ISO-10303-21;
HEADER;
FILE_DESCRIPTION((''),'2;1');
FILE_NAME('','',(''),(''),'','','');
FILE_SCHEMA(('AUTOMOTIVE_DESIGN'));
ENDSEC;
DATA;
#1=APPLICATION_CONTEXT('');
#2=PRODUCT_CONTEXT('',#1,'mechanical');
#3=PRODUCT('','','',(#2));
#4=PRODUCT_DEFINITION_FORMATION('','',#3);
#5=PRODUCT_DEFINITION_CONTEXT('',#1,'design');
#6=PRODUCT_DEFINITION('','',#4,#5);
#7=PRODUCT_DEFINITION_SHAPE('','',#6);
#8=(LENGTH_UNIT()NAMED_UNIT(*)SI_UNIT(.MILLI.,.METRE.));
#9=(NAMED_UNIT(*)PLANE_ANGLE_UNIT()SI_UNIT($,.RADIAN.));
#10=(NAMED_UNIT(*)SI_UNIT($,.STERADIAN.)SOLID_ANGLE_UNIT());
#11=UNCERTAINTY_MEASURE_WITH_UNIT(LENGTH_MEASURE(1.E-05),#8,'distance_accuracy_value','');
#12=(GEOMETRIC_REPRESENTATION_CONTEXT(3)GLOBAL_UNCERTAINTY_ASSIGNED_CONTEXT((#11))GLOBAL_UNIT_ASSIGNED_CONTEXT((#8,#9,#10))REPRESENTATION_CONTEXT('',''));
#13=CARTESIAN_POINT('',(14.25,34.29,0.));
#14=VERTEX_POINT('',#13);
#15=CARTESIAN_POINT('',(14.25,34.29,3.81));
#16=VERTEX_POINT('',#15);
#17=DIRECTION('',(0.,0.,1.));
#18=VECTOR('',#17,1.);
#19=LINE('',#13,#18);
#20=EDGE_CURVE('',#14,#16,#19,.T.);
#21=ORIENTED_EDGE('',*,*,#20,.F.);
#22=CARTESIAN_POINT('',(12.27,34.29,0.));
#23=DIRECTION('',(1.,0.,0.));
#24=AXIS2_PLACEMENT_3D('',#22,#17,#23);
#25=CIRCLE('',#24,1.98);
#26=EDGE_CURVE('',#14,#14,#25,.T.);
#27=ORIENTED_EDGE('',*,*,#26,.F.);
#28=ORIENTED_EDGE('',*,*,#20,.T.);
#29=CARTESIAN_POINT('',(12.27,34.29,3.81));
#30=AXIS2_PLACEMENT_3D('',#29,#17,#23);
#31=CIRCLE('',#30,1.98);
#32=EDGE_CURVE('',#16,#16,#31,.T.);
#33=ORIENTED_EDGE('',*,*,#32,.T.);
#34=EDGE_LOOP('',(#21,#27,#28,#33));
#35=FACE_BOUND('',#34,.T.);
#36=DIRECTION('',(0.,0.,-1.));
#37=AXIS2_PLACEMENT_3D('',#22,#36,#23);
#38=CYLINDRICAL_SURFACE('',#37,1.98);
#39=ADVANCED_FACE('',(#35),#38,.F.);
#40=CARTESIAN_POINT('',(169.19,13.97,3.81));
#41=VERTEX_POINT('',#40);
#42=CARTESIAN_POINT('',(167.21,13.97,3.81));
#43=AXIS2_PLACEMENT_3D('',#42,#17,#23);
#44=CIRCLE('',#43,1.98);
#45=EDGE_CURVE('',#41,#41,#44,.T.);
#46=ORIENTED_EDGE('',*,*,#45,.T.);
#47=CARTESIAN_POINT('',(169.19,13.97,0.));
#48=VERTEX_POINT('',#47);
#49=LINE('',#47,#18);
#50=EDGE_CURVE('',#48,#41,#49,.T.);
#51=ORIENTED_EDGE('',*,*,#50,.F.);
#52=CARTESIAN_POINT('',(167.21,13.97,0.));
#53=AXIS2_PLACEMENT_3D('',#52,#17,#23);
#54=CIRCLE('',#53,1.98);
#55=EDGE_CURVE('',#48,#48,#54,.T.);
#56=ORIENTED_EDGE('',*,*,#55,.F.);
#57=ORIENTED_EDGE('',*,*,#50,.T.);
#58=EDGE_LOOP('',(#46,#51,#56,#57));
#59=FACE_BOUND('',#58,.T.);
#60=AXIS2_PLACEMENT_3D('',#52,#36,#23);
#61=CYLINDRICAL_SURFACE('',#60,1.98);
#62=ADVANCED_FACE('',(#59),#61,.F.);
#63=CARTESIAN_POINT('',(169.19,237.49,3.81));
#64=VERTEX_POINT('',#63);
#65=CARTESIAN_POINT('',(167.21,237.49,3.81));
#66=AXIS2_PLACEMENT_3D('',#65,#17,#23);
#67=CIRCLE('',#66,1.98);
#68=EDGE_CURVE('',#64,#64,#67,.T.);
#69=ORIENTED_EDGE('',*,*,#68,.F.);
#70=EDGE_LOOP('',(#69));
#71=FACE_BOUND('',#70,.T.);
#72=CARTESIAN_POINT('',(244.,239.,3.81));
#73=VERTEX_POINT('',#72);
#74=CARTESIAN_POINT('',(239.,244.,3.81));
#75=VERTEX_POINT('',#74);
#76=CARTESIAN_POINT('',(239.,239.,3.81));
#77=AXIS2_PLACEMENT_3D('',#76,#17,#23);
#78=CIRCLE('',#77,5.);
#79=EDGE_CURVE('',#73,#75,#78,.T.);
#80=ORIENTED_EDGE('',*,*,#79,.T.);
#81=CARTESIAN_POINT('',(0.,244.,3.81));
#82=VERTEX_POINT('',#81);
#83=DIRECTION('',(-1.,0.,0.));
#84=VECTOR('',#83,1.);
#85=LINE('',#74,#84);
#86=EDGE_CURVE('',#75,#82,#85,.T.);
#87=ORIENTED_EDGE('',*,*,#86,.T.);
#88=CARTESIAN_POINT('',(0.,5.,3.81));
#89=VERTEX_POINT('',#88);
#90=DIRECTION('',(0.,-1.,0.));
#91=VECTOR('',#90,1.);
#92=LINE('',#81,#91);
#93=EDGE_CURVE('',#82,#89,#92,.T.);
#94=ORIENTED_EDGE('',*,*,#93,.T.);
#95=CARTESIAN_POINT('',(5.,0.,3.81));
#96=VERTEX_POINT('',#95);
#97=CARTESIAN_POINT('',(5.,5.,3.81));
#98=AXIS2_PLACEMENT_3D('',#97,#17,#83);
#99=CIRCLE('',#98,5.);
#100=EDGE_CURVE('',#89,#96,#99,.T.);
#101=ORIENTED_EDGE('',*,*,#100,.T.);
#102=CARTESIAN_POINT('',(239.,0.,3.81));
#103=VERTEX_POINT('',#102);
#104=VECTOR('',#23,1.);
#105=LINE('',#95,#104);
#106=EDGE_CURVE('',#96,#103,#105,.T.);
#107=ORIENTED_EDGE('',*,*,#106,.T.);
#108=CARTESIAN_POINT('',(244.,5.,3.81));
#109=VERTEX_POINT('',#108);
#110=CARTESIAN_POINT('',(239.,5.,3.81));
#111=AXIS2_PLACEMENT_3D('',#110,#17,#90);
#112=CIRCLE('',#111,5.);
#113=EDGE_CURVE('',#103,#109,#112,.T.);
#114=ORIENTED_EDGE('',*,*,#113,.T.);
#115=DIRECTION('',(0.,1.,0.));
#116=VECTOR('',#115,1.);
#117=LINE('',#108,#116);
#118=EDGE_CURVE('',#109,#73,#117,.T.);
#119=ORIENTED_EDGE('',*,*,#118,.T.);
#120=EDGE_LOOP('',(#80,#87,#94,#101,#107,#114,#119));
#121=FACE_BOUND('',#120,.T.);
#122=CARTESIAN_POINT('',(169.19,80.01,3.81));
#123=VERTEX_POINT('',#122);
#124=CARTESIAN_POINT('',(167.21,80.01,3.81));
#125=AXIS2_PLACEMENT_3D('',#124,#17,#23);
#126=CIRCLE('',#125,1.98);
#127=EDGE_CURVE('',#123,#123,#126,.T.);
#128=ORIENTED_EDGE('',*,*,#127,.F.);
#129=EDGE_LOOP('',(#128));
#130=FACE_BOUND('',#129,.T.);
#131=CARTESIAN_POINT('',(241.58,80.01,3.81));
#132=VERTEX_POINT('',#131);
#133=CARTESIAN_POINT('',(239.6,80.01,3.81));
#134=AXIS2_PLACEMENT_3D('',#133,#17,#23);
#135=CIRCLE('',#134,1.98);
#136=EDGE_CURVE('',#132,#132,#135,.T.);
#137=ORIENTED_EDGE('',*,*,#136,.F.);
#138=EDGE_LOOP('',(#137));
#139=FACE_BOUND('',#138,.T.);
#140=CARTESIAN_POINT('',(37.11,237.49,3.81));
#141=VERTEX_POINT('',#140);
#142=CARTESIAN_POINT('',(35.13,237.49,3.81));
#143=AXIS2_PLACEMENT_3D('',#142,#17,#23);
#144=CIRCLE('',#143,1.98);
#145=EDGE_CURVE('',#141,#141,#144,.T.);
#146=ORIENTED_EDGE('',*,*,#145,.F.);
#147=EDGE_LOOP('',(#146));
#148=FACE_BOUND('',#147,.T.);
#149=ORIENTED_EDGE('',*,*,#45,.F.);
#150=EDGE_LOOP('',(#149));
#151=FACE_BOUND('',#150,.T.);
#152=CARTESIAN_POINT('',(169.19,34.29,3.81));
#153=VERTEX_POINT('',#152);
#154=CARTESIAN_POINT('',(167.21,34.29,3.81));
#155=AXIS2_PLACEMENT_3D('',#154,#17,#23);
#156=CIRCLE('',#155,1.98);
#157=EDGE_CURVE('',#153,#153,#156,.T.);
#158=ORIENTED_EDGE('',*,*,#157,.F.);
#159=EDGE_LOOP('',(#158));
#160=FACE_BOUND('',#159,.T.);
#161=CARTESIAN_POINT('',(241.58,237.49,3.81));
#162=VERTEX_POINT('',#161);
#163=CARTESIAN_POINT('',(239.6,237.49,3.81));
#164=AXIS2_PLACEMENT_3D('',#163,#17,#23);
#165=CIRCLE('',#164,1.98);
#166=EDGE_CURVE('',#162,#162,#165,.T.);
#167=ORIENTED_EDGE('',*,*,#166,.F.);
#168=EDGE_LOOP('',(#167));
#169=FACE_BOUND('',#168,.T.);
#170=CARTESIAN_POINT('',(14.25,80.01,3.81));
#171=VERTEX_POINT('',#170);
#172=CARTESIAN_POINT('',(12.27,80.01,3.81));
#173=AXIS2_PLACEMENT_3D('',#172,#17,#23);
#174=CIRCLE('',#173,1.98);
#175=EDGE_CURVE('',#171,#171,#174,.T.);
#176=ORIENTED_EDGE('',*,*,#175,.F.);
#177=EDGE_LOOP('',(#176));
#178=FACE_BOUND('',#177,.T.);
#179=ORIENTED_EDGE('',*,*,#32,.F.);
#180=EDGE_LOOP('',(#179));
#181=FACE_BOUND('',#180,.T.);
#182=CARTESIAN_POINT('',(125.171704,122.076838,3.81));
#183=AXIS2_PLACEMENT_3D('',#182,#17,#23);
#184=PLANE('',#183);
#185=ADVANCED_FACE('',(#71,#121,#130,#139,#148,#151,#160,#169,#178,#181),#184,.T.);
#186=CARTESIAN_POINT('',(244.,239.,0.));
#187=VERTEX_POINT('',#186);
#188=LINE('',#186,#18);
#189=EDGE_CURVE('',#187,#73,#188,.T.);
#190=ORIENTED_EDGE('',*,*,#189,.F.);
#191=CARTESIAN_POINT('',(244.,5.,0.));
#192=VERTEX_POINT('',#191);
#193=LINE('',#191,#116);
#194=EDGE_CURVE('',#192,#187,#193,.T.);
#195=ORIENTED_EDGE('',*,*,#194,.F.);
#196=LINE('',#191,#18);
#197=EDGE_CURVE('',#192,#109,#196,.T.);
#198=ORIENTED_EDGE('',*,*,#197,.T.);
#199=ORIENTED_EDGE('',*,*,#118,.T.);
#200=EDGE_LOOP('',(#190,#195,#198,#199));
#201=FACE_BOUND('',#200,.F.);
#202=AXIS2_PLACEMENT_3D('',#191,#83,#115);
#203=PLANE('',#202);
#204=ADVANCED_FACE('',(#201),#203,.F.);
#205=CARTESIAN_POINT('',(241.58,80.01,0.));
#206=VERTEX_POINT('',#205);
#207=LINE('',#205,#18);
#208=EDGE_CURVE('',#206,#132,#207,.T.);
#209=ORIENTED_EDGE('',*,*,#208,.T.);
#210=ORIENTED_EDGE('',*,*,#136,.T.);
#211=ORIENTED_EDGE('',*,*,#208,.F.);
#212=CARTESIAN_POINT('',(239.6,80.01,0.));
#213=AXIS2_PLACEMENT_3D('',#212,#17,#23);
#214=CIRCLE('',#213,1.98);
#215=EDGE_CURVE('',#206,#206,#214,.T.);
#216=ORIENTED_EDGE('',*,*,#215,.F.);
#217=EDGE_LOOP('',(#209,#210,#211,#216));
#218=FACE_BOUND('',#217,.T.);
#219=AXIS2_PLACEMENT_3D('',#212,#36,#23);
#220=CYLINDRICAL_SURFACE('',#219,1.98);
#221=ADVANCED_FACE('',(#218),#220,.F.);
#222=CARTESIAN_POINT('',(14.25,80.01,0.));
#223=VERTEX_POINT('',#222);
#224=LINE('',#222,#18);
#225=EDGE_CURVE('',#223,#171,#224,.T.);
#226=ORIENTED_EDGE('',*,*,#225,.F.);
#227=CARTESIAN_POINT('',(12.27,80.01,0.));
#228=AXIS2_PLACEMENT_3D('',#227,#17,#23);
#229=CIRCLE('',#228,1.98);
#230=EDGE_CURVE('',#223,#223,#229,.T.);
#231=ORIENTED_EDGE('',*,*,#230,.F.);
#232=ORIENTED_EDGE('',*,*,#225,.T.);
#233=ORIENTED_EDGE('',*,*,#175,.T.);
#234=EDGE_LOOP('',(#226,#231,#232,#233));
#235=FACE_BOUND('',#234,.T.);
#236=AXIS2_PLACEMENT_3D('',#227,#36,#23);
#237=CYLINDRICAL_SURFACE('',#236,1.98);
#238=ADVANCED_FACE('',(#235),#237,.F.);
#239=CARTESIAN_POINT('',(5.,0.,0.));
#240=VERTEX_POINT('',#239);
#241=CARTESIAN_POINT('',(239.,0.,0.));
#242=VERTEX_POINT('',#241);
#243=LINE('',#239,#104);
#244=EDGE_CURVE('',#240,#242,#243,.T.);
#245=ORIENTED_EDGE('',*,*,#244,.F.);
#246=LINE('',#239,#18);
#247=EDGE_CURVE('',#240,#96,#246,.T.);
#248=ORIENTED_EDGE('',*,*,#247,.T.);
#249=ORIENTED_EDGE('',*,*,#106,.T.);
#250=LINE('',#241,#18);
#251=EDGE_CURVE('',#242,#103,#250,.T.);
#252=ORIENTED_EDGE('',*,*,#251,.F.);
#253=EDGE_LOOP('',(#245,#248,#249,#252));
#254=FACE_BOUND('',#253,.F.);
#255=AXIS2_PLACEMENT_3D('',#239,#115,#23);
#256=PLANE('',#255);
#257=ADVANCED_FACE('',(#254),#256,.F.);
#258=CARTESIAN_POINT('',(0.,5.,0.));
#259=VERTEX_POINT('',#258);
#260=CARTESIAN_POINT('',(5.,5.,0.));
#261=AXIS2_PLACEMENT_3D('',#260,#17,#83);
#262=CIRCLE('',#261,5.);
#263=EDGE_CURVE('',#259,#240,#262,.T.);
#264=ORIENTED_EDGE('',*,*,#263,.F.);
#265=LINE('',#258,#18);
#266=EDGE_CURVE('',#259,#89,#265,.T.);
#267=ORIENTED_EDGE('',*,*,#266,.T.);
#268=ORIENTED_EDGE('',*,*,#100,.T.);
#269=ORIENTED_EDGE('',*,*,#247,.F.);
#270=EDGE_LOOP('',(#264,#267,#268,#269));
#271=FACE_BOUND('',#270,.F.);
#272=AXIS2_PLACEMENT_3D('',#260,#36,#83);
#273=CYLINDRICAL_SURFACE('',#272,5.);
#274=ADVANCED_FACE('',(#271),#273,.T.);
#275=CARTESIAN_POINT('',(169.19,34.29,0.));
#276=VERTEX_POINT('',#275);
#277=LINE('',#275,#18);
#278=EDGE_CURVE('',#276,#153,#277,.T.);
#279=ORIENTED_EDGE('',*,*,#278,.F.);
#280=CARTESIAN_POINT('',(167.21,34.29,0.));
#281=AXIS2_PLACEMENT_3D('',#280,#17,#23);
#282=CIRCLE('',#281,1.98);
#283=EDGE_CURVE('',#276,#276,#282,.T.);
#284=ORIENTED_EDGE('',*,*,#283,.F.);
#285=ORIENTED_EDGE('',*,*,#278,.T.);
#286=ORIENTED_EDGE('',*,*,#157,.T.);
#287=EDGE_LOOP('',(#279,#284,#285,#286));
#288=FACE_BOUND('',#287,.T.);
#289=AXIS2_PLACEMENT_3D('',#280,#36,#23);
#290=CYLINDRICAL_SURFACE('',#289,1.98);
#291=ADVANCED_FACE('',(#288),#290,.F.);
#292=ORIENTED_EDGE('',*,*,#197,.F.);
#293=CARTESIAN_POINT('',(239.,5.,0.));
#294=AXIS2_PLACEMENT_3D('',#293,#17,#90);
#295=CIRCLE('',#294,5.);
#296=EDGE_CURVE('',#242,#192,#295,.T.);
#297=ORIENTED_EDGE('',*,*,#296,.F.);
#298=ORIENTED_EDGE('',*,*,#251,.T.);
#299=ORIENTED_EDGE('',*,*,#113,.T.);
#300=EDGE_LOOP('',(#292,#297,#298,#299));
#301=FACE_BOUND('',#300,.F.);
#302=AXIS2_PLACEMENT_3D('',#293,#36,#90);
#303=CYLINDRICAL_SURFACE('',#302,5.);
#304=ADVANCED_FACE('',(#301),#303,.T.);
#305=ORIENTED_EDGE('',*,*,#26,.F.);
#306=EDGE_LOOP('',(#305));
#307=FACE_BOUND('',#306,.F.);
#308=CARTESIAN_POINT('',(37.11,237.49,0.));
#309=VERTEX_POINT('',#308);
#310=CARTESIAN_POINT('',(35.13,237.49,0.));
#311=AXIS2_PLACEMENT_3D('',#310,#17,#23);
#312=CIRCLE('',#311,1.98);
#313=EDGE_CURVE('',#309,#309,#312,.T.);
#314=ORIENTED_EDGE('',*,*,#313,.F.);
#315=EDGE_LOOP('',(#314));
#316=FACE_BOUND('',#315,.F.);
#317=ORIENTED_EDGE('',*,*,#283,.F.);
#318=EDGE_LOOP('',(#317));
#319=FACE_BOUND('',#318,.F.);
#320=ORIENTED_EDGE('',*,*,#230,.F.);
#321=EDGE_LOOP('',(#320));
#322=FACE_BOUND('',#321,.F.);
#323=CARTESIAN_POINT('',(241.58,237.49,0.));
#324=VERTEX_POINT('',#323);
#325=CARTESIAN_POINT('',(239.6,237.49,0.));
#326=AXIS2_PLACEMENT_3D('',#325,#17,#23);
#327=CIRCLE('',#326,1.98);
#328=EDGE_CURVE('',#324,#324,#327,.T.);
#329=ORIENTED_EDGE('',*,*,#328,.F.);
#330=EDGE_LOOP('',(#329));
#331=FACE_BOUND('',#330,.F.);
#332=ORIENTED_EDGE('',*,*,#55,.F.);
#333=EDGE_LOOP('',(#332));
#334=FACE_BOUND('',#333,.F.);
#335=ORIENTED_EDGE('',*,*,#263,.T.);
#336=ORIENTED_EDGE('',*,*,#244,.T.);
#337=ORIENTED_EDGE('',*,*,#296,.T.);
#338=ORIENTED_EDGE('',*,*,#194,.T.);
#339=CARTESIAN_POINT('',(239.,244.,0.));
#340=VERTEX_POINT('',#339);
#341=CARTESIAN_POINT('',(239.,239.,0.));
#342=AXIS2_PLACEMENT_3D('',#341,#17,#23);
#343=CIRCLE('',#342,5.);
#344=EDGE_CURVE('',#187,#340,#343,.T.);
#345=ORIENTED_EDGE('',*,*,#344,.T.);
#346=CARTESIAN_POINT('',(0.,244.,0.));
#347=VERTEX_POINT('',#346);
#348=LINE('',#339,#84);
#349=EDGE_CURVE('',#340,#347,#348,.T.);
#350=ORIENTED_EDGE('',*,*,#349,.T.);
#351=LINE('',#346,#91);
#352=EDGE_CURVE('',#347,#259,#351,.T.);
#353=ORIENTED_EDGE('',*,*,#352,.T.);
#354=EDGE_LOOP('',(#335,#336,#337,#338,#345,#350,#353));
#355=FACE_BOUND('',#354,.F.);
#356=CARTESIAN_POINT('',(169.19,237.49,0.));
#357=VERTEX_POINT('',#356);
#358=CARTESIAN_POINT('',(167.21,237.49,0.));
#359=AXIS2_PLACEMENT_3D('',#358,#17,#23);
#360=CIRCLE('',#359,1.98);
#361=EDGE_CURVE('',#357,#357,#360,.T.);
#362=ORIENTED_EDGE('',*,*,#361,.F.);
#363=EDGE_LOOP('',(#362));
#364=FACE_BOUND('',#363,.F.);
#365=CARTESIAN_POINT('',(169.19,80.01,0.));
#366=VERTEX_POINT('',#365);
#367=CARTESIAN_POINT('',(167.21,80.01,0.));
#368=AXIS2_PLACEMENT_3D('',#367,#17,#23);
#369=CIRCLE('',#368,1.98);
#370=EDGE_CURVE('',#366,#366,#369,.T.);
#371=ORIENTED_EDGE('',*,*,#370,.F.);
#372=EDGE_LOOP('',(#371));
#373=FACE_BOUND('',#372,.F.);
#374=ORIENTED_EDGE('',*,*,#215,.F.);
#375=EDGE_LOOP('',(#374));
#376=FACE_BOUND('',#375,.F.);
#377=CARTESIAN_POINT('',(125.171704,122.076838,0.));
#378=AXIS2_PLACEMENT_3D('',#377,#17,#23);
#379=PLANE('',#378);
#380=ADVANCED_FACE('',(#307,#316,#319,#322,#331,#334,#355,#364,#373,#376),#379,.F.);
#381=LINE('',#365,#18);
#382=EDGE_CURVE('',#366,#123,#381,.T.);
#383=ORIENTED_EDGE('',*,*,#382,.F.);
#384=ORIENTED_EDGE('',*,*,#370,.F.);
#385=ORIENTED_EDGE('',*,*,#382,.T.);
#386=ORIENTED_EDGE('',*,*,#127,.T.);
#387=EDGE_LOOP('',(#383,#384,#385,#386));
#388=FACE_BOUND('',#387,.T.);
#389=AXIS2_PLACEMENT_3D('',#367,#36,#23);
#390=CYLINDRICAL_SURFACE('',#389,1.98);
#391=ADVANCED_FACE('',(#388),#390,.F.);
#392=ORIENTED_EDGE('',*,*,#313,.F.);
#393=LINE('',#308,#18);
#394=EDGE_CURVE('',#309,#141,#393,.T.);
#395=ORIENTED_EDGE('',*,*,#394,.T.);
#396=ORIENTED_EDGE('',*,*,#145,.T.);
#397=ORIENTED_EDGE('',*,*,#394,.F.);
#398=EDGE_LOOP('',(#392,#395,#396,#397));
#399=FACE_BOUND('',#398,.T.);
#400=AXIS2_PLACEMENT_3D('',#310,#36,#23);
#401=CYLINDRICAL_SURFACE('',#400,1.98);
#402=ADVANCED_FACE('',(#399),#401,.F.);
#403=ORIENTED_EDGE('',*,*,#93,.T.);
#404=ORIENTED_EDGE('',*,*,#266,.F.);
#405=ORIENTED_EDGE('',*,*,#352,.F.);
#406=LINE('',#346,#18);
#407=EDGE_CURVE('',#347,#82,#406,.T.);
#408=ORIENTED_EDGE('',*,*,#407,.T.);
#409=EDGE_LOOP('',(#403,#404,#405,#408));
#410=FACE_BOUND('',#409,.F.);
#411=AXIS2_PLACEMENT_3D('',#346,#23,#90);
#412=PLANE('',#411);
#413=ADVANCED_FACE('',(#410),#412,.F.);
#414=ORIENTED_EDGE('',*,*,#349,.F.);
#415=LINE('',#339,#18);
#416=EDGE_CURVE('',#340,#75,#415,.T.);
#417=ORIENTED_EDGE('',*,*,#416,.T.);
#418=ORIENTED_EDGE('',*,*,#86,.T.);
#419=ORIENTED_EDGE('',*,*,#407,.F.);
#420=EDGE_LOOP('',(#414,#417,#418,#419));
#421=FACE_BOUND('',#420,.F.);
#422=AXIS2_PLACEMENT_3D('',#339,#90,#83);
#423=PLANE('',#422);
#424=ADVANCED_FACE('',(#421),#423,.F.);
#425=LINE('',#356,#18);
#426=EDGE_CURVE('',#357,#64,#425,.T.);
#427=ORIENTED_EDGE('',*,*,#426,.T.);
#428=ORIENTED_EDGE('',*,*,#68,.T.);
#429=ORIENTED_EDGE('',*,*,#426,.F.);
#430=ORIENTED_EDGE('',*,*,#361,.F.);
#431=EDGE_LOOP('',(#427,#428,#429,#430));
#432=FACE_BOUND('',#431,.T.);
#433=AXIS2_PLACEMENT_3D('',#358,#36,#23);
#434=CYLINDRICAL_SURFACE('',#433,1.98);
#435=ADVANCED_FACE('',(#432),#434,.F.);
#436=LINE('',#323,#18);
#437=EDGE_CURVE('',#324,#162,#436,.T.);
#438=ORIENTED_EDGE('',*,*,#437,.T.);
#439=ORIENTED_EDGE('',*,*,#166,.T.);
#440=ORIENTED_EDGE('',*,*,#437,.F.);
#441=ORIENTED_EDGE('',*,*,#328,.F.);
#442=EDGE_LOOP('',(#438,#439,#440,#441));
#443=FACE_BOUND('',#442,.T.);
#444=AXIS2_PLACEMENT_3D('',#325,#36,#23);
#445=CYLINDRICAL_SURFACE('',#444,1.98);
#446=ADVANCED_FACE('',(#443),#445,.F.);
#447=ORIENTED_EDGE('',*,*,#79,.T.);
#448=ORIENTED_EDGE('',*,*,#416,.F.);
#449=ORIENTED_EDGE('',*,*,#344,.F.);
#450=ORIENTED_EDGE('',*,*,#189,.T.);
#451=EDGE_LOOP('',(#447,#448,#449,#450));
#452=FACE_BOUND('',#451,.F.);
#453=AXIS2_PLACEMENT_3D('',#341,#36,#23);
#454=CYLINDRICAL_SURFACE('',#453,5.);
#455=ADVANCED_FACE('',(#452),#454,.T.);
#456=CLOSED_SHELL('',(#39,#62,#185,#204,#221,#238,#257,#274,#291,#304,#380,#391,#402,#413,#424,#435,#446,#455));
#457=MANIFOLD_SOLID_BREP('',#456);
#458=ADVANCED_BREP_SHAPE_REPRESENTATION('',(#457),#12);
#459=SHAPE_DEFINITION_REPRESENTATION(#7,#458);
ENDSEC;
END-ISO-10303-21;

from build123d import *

# Parameters (mm, degrees)
F0_R     = 1.98
F0_W     = 103.5421602428
F0_H     = 6.8848114461
F0_W_2   = 8.5047781467
F0_H_2   = 22.0043957233
F0_W_3   = 28.3794738352
F0_H_3   = 70.3811049461
F0_W_4   = 42.310371995
F0_H_4   = 43.9875721931
F0_W_5   = 6.8728923798
F0_H_5   = 133.4486082196
F0_W_6   = 70.3811049461
F0_H_6   = 22.2639712095
F0_W_7   = 22.4677734077
F0_H_7   = 158.75
F1_DEPTH = 3.81


# Not quite as in the source:
# - a feature of the source that left no trace in its solid (it failed there, or was rolled back) is left out


with BuildPart() as f1:
    # F0 (on Top) → F1 (new body)
    with BuildSketch(Plane.XY):
        with BuildLine():
            ThreePointArc((0, 5), (1.4644660941, 1.4644660941), (5, 0))
            Line((5, 0), (239, 0))
            ThreePointArc((239, 0), (242.5355339059, 1.4644660941), (244, 5))
            Line((244, 5), (244, 239))
            ThreePointArc((244, 239), (242.5355339059, 242.5355339059), (239, 244))
            Line((239, 244), (155.4765701294, 244))
            Line((155.4765701294, 244), (155.4765701294, 221.7360287905))
            Line((155.4765701294, 221.7360287905), (85.0954651833, 221.7360287905))
            Line((85.0954651833, 221.7360287905), (85.0954651833, 244))
            Line((85.0954651833, 244), (22.4677734077, 244))
            Line((22.4677734077, 244), (22.4677734077, 85.25))
            Line((22.4677734077, 85.25), (0, 85.25))
            Line((0, 85.25), (0, 5))
        make_face()
        with Locations((12.27, 34.29)):
            Circle(F0_R, mode=Mode.SUBTRACT)
        with Locations((94.4036040455, 18.8242988661)):
            Rectangle(F0_W, F0_H, mode=Mode.SUBTRACT)
        with Locations((12.27, 80.01)):
            Circle(F0_R, mode=Mode.SUBTRACT)
        with Locations((167.21, 13.97)):
            Circle(F0_R, mode=Mode.SUBTRACT)
        with Locations((167.21, 34.29)):
            Circle(F0_R, mode=Mode.SUBTRACT)
        with Locations((152.7901440859, 81.0341909528)):
            Rectangle(F0_W_2, F0_H_2, mode=Mode.SUBTRACT)
        with Locations((167.21, 80.01)):
            Circle(F0_R, mode=Mode.SUBTRACT)
        with Locations((239.6, 80.01)):
            Circle(F0_R, mode=Mode.SUBTRACT)
        with Locations((56.3754346222, 171.5611219406)):
            Rectangle(F0_W_3, F0_H_3, mode=Mode.SUBTRACT)
        with Locations((35.13, 237.49)):
            Circle(F0_R, mode=Mode.SUBTRACT)
        with Locations((123.8708272576, 159.014120698)):
            Rectangle(F0_W_4, F0_H_4, mode=Mode.SUBTRACT)
        with Locations((180.2064478397, 157.2181545198)):
            Rectangle(F0_W_5, F0_H_5, mode=Mode.SUBTRACT)
        with Locations((189.3064478397, 157.2181545198)):
            Rectangle(F0_W_5, F0_H_5, mode=Mode.SUBTRACT)
        with Locations((198.4064478397, 157.2181545198)):
            Rectangle(F0_W_5, F0_H_5, mode=Mode.SUBTRACT)
        with Locations((207.5064478397, 157.2181545198)):
            Rectangle(F0_W_5, F0_H_5, mode=Mode.SUBTRACT)
        with Locations((167.21, 237.49)):
            Circle(F0_R, mode=Mode.SUBTRACT)
        with Locations((239.6, 237.49)):
            Circle(F0_R, mode=Mode.SUBTRACT)
        with Locations((94.4036040455, 18.8242988661)):
            Rectangle(F0_W, F0_H)
        with Locations((152.7901440859, 81.0341909528)):
            Rectangle(F0_W_2, F0_H_2)
        with Locations((180.2064478397, 157.2181545198)):
            Rectangle(F0_W_5, F0_H_5)
        with Locations((189.3064478397, 157.2181545198)):
            Rectangle(F0_W_5, F0_H_5)
        with Locations((198.4064478397, 157.2181545198)):
            Rectangle(F0_W_5, F0_H_5)
        with Locations((207.5064478397, 157.2181545198)):
            Rectangle(F0_W_5, F0_H_5)
        with Locations((123.8708272576, 159.014120698)):
            Rectangle(F0_W_4, F0_H_4)
        with Locations((56.3754346222, 171.5611219406)):
            Rectangle(F0_W_3, F0_H_3)
        with Locations((120.2860176563, 232.8680143952)):
            Rectangle(F0_W_6, F0_H_6)
        with Locations((11.2338867038, 164.625)):
            Rectangle(F0_W_7, F0_H_7)
    extrude(amount=F1_DEPTH)


solid = f1.part
